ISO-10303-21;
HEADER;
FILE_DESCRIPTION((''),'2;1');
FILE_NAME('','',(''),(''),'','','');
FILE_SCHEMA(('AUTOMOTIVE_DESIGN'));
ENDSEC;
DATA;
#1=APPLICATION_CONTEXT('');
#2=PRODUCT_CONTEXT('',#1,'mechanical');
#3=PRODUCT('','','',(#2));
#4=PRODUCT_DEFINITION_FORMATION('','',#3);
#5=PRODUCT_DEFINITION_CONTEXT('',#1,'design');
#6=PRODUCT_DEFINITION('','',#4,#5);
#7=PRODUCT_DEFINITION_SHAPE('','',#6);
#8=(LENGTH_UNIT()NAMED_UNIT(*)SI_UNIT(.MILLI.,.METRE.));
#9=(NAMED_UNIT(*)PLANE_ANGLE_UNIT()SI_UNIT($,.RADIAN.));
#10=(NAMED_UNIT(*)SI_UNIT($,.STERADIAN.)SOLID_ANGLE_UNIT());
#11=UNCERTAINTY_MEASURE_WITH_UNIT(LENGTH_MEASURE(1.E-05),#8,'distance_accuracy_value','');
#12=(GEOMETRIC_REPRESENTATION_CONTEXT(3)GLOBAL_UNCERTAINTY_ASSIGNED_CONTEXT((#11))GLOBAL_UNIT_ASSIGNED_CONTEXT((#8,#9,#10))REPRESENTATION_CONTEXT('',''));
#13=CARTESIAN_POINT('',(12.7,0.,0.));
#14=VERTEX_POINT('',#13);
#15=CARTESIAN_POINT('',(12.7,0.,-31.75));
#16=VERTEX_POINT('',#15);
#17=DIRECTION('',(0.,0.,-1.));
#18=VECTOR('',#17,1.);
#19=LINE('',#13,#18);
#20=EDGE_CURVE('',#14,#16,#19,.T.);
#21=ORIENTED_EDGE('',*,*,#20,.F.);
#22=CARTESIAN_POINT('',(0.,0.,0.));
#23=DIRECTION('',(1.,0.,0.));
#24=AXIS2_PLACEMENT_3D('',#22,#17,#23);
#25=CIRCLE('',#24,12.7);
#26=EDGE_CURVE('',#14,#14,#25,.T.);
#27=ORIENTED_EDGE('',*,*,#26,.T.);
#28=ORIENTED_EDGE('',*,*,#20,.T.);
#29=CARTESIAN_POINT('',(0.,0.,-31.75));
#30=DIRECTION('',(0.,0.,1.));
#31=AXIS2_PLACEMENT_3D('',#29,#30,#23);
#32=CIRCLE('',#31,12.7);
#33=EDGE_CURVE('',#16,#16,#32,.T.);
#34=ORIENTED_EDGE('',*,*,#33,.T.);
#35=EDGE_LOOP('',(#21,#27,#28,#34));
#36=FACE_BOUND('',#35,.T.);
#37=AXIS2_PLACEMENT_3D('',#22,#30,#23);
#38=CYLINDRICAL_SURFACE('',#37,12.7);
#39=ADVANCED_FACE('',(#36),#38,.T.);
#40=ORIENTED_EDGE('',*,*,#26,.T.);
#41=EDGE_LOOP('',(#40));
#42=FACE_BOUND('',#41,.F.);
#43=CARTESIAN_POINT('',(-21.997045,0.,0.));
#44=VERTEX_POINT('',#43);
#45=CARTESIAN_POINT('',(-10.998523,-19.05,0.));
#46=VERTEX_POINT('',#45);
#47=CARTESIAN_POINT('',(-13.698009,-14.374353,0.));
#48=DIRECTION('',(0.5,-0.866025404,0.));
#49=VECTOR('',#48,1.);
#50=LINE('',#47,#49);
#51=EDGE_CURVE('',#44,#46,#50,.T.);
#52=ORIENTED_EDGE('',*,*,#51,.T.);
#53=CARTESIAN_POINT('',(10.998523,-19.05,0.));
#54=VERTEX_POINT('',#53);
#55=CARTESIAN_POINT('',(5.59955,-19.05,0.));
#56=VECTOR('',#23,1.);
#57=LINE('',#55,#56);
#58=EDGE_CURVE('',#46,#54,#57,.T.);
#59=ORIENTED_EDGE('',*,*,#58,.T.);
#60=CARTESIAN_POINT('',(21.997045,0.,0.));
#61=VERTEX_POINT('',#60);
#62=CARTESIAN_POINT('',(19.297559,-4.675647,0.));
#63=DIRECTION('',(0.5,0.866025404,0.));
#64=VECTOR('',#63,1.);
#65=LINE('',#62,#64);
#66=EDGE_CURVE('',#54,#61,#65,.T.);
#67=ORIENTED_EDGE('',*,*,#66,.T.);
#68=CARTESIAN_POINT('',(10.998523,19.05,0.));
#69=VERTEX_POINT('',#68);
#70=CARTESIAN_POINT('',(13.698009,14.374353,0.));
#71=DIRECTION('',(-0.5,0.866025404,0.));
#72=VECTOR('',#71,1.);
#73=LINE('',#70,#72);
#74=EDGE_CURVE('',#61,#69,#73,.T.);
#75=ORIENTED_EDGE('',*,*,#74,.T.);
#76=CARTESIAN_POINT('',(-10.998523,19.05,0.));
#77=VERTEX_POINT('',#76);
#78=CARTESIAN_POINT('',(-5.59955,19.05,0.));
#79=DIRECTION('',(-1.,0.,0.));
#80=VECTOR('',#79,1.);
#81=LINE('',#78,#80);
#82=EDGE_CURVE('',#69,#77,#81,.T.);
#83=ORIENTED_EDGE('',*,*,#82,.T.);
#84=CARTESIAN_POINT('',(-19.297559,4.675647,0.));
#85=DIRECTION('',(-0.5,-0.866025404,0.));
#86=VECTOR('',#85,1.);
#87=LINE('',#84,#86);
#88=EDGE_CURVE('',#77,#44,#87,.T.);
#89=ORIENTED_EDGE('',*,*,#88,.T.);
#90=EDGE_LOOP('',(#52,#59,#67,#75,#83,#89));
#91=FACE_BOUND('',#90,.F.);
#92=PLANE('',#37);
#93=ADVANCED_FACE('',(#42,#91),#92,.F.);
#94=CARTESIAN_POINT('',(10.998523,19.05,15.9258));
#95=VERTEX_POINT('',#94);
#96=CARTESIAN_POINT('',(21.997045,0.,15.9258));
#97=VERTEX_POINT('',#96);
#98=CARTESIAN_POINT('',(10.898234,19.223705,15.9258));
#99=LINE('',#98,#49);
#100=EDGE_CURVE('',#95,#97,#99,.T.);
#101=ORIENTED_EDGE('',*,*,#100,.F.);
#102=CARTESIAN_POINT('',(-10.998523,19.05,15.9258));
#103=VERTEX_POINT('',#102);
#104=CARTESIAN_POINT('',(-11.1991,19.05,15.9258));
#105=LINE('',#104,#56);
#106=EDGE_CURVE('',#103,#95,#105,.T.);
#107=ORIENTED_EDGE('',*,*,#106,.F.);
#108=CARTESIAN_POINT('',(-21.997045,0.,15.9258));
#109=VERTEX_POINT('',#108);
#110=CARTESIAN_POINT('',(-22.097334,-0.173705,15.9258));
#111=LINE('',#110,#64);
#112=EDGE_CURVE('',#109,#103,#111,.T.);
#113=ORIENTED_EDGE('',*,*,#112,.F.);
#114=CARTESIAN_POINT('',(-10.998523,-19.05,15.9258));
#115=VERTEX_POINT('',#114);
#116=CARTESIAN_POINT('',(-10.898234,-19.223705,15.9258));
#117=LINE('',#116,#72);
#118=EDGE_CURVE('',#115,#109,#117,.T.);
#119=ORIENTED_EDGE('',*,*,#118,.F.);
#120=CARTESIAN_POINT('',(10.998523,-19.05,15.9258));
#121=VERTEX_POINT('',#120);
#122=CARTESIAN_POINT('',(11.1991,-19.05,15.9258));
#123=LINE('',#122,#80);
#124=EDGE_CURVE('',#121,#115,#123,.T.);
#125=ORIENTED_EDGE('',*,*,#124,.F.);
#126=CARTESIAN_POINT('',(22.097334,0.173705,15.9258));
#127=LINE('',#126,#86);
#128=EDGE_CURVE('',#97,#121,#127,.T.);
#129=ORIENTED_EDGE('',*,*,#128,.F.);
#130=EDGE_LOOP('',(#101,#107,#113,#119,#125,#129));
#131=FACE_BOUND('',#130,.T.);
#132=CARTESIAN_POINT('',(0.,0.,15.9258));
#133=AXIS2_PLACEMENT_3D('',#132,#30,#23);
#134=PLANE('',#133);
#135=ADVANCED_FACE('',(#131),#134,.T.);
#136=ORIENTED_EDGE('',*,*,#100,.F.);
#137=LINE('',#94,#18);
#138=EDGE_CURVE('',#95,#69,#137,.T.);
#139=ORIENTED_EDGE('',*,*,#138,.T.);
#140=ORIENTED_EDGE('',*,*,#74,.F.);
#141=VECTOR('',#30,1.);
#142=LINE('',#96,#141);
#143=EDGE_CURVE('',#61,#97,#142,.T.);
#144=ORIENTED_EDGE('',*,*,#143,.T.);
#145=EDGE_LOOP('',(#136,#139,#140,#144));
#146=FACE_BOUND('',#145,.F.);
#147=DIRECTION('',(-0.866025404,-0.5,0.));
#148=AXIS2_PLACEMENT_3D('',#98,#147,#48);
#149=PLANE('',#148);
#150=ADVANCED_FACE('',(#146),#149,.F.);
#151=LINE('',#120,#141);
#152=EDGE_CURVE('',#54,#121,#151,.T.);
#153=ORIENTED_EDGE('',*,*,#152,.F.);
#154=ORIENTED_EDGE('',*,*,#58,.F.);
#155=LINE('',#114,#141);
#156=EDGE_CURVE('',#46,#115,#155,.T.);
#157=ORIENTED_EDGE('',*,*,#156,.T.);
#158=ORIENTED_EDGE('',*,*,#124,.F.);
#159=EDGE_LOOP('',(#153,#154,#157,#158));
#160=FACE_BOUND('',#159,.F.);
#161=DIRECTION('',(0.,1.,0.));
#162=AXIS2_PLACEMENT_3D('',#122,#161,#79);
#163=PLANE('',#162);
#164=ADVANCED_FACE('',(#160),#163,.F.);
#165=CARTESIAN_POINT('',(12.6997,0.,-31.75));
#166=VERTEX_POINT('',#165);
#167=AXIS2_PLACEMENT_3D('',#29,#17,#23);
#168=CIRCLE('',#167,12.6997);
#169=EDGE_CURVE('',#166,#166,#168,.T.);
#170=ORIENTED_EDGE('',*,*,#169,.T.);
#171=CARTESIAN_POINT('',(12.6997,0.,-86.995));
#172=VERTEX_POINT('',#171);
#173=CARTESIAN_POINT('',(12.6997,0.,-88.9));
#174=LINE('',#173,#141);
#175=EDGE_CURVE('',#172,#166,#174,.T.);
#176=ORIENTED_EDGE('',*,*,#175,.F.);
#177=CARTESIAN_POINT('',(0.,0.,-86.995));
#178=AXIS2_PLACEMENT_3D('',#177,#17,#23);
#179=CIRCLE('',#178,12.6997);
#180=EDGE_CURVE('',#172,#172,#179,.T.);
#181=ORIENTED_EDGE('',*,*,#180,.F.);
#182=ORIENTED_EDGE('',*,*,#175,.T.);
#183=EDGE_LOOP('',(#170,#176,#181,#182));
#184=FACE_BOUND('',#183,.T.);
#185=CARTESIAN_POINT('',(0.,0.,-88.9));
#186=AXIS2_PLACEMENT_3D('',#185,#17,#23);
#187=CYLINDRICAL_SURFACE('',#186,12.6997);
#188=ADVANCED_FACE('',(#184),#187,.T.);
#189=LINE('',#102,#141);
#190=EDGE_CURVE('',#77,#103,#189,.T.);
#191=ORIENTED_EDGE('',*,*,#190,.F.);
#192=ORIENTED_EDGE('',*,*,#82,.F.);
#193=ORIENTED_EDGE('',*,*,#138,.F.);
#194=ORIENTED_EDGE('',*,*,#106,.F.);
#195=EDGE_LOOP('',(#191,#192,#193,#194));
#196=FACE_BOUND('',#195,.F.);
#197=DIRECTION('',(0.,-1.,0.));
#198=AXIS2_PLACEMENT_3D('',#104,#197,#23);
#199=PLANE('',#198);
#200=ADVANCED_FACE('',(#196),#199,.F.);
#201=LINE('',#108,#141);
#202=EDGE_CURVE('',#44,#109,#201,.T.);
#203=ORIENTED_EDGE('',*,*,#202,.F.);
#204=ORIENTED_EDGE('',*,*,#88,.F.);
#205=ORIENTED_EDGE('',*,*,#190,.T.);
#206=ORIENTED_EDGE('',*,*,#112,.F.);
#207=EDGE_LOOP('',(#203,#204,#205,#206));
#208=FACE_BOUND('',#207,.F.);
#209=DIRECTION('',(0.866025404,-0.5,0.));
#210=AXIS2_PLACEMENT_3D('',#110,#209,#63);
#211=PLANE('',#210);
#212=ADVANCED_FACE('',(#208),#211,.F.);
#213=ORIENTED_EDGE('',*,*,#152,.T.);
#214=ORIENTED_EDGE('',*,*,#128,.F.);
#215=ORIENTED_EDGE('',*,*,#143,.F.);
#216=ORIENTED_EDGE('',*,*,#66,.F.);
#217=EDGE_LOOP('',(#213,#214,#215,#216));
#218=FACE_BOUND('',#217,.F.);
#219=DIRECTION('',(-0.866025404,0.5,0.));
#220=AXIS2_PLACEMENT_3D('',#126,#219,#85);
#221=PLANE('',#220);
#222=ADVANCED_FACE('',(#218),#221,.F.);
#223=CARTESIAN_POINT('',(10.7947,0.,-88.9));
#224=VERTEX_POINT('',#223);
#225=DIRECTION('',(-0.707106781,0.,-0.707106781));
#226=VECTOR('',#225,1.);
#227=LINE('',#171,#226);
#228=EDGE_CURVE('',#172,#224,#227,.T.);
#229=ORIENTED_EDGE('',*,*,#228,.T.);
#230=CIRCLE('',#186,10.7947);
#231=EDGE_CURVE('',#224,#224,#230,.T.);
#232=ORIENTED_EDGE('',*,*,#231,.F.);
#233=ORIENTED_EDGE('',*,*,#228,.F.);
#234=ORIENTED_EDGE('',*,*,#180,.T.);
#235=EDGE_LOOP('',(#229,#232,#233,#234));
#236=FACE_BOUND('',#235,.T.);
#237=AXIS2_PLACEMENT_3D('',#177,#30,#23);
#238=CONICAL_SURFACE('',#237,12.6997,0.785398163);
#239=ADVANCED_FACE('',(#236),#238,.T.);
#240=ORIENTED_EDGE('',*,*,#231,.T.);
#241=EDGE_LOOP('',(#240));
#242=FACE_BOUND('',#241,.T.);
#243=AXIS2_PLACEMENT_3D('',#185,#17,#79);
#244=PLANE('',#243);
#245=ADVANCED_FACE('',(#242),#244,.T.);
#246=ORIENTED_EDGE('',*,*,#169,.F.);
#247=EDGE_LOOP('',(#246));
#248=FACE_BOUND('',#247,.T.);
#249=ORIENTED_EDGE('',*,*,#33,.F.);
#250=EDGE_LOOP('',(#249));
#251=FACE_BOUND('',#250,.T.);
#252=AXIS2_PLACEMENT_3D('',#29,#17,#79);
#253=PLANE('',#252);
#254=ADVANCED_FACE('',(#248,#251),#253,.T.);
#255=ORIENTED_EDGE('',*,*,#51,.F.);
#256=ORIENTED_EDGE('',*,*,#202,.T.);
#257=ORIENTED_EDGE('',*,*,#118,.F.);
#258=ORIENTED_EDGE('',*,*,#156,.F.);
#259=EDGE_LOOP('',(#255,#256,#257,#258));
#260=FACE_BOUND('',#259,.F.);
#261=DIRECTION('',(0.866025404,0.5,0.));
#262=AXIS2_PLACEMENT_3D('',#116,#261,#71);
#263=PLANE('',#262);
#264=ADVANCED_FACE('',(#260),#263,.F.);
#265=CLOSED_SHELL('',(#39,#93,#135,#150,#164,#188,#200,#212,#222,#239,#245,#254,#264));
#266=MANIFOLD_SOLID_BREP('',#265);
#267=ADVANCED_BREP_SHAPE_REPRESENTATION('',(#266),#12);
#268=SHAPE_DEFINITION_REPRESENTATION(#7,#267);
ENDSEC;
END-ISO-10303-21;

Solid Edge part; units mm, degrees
sketch "Sketch1" plane through (0, 0, 0) normal (0, 0, 1) x (1, 0, 0)
  circle A0 centre (0, 0) radius 22.098
  dimension "D1" = 44.196
extrude "Protrusion1" add sketch "Sketch1" along normal blind 15.9258
sketch "Sketch2" plane through (0, 0, 0) normal (0, 0, -1) x (1, 0, 0)
  circle A0 centre (0, 0) radius 12.7
extrude "Protrusion2" add sketch "Sketch2" along normal blind 88.9
sketch "Sketch3" plane through (0, 0, -88.9) normal (0, 0, -1) x (1, 0, 0)
  circle A0 centre (0, 0) radius 12.6997
extrude "Cutout1" cut sketch "Sketch3" against normal blind 57.15 flip side to cut
chamfer "Chamfer_1" distance 1.905 angle 45 1 edges at (-12.6997, 0, -88.9)
sketch "Sketch4" plane through (0, 0, 15.9258) normal (0, 0, 1) x (1, 0, 0)
  line L0 (-11.1991, 19.05) -> (11.1991, 19.05)
  dimension "D1" = 38.1
extrude "Cutout2" cut sketch "Sketch4" against normal up to next material side at (0, 19.1, 15.9258)
pattern_circular "Pattern1" count 6 over 360 about axis through (0, 0, 15.9258) along (0, 0, 1) of "Cutout2"
properties part number "24101503"
